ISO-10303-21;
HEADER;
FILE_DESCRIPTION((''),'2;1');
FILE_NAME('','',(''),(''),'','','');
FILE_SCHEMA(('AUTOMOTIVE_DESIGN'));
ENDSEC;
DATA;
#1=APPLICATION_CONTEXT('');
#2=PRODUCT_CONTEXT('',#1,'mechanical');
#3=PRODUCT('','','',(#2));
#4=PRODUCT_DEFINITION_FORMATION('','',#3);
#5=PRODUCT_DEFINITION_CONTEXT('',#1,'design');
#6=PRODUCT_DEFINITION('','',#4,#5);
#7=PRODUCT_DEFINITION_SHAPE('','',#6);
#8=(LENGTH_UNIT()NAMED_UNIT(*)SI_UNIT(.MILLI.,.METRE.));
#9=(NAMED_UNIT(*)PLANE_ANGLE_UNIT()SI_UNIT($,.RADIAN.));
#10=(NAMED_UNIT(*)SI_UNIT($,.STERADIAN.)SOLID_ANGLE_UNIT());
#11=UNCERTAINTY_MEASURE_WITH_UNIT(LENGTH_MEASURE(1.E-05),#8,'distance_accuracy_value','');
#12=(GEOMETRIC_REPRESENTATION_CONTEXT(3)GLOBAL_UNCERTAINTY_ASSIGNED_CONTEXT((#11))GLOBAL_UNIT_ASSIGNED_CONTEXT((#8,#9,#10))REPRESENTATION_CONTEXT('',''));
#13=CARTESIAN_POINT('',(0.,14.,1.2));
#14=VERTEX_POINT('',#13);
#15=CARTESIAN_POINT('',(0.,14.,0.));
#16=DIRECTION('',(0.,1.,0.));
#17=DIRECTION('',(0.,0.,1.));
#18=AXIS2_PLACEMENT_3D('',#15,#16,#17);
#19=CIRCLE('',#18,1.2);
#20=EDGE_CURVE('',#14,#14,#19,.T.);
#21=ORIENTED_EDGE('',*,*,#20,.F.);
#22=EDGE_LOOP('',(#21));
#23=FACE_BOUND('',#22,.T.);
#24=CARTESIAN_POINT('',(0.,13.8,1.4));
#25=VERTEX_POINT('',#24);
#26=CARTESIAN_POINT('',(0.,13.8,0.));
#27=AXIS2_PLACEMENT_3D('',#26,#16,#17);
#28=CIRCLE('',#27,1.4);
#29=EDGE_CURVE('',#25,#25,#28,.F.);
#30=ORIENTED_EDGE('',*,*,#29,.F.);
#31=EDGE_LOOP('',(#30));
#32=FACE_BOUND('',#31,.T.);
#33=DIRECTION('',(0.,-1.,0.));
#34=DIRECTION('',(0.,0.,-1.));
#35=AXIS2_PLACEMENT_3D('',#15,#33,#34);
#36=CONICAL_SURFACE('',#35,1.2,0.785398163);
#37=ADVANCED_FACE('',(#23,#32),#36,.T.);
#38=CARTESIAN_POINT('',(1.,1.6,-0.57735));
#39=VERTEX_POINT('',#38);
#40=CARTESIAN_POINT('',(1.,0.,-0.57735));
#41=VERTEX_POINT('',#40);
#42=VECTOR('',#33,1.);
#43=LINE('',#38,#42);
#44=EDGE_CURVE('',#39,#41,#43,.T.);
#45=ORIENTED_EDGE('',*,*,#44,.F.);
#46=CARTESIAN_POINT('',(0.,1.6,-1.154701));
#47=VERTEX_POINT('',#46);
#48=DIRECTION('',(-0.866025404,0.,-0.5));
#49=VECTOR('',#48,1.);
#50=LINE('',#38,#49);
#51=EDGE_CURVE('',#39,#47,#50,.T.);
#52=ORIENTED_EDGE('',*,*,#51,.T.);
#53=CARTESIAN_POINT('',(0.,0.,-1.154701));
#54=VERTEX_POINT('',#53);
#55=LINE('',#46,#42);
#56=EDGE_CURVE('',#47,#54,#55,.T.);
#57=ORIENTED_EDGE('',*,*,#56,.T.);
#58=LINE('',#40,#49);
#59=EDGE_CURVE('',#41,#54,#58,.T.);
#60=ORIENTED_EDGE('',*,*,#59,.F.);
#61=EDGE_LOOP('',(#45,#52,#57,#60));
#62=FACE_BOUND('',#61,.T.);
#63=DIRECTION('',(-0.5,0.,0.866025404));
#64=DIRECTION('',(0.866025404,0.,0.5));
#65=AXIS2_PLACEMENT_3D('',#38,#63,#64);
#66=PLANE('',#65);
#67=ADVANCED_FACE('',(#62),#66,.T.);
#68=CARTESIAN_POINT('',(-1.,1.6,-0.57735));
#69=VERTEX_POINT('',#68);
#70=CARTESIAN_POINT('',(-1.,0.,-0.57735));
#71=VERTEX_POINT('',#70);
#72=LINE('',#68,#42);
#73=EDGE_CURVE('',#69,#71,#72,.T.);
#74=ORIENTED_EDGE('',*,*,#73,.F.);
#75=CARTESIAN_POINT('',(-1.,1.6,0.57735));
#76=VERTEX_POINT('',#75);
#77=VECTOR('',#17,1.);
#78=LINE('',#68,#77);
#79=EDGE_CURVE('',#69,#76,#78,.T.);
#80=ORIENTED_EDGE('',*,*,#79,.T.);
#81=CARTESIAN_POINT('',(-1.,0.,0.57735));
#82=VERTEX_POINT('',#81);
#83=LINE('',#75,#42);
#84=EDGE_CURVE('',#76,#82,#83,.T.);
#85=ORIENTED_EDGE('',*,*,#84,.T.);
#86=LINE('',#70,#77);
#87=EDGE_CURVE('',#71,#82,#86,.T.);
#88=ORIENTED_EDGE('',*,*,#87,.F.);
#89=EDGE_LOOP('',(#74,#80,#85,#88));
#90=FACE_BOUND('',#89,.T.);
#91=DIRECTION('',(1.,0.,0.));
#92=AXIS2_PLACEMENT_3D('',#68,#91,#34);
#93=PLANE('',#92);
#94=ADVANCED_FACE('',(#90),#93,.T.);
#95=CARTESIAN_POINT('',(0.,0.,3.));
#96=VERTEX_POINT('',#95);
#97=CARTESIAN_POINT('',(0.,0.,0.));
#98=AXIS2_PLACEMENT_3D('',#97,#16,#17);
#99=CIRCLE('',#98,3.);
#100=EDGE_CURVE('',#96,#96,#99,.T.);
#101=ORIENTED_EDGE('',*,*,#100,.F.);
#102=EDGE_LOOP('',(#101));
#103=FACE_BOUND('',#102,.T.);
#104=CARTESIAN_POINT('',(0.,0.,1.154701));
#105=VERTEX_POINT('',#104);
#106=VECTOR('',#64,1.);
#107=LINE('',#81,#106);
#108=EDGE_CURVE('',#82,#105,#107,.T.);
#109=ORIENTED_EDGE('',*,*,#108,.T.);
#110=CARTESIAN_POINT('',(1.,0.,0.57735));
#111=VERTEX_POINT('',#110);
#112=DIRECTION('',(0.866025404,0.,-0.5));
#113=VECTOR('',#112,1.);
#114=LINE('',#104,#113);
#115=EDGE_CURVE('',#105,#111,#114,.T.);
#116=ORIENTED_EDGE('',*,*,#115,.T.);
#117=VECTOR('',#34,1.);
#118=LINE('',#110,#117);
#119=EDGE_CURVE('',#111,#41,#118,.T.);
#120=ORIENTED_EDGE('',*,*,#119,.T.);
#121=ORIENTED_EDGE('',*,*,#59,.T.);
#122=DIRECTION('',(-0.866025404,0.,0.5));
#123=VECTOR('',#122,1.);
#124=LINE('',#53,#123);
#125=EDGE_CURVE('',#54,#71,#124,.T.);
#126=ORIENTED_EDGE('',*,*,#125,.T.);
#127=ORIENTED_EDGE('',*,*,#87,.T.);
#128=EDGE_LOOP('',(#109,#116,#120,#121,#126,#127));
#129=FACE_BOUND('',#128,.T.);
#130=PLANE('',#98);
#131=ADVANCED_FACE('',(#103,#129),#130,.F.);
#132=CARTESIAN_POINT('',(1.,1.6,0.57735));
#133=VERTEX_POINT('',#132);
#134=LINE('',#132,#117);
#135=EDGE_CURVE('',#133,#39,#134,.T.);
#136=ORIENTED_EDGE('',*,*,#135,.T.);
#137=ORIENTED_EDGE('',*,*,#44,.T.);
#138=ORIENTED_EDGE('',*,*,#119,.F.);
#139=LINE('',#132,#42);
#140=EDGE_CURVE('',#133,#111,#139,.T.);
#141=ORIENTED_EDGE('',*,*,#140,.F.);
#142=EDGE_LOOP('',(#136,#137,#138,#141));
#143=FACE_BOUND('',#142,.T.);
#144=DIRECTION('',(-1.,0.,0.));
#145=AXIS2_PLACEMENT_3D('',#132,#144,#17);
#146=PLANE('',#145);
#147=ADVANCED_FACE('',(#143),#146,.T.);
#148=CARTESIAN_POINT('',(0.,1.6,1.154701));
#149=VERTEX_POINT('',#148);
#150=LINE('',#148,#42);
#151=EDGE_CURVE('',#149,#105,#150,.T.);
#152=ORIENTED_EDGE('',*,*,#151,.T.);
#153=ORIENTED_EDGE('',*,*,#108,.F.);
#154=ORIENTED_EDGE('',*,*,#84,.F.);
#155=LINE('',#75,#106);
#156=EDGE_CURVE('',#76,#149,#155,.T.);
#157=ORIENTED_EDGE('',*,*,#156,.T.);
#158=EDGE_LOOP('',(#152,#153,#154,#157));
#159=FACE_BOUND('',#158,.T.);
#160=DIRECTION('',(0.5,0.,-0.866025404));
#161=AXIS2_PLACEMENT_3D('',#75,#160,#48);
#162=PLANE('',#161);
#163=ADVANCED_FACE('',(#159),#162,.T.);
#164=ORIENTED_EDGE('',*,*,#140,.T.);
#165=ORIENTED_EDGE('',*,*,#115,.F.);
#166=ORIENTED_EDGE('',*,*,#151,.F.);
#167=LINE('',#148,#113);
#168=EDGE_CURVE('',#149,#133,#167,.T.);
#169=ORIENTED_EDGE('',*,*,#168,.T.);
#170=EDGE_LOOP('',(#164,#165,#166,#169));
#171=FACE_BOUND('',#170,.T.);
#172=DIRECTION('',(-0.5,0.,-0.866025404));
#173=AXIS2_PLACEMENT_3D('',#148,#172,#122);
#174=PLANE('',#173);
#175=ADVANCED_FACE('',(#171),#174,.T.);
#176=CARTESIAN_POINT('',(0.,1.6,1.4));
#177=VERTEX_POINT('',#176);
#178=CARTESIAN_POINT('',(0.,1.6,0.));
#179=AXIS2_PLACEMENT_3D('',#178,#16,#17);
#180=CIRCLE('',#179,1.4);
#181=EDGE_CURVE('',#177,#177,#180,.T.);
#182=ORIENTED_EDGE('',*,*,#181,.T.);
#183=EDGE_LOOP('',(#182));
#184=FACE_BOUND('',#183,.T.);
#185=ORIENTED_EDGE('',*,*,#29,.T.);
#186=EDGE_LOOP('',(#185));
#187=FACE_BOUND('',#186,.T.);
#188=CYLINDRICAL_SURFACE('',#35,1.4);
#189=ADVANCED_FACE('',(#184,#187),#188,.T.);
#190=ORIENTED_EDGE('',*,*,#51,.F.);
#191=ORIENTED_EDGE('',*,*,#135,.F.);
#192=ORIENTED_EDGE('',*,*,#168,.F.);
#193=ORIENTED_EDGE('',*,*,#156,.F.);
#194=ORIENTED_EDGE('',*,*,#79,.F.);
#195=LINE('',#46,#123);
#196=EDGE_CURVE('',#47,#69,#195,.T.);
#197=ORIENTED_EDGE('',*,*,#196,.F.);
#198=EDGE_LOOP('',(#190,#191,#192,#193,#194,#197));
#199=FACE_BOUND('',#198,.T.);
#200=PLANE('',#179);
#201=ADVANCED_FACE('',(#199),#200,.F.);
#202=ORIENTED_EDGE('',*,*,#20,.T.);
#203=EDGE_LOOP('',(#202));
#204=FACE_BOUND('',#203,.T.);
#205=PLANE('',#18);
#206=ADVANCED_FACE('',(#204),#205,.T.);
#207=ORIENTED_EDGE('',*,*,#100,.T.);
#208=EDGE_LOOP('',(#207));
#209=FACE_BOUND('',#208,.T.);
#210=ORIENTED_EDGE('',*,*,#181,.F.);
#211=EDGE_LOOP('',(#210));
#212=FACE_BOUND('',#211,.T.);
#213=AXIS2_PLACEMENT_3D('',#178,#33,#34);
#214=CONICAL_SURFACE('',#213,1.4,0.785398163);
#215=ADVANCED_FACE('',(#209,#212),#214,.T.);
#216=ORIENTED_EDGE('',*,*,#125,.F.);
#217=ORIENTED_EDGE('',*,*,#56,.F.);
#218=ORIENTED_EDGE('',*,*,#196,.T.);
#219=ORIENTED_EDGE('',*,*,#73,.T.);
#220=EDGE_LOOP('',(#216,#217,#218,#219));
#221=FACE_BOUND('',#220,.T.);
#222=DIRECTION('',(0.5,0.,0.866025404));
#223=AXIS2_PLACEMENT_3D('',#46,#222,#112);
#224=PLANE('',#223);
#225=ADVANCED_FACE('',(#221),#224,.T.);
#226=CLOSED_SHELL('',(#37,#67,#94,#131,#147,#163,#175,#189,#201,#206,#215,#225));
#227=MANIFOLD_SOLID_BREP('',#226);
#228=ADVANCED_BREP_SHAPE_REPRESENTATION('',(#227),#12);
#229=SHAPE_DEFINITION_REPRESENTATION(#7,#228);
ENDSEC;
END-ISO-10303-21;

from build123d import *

# Parameters (mm, degrees)
SKETCH_1_R      = 3
EXTRUDE_1_DEPTH = 1.6
CHAMFER_1_SIZE  = 1.6
SKETCH_2_R      = 1.4
EXTRUDE_2_DEPTH = 12.4
CHAMFER_2_SIZE  = 0.2


with BuildPart() as part:
    # 草图1 → 凸台-拉伸1 (new body)
    with BuildSketch(Plane(origin=(0, 0, 0), x_dir=(1, 0, 0), z_dir=(0, 1, 0))):
        with Locations(Location((0, 0, 0), (0, 0, 270))):
            Circle(SKETCH_1_R)
        Polygon((0, -1.154700538), (1, -0.577350269), (1, 0.577350269), (0, 1.154700538), (-1, 0.577350269), (-1, -0.577350269), align=None, mode=Mode.SUBTRACT)
    extrude(amount=EXTRUDE_1_DEPTH)

    # 倒角1
    # the kernel refuses this chamfer: 1.6 mm, written as the material it takes off along each edge
    with BuildSketch(Plane(origin=(0, 1.6, 0), x_dir=(0, 0, 1), z_dir=(-1, 0, 0))) as chamfer_1_piece_1:
        Polygon((3, -CHAMFER_1_SIZE), (3 - CHAMFER_1_SIZE, 0), (3, 0), align=None)
    revolve(axis=Axis((0, 1.6, 0), (0, 1, 0)), mode=Mode.SUBTRACT)

    # 草图2 → 凸台-拉伸2 (add)
    with BuildSketch(Plane(origin=(0, 1.6, 0), x_dir=(1, 0, 0), z_dir=(0, 1, 0))):
        with Locations(Location((0, 0, 0), (0, 0, 270))):
            Circle(SKETCH_2_R)
    extrude(amount=EXTRUDE_2_DEPTH)

    # 倒角2
    chamfer_2_edges = [part.edges().sort_by_distance(p)[0] for p in [
        (0, 14, -1.4),
    ]]
    chamfer(chamfer_2_edges, length=CHAMFER_2_SIZE)


solid = part.part
